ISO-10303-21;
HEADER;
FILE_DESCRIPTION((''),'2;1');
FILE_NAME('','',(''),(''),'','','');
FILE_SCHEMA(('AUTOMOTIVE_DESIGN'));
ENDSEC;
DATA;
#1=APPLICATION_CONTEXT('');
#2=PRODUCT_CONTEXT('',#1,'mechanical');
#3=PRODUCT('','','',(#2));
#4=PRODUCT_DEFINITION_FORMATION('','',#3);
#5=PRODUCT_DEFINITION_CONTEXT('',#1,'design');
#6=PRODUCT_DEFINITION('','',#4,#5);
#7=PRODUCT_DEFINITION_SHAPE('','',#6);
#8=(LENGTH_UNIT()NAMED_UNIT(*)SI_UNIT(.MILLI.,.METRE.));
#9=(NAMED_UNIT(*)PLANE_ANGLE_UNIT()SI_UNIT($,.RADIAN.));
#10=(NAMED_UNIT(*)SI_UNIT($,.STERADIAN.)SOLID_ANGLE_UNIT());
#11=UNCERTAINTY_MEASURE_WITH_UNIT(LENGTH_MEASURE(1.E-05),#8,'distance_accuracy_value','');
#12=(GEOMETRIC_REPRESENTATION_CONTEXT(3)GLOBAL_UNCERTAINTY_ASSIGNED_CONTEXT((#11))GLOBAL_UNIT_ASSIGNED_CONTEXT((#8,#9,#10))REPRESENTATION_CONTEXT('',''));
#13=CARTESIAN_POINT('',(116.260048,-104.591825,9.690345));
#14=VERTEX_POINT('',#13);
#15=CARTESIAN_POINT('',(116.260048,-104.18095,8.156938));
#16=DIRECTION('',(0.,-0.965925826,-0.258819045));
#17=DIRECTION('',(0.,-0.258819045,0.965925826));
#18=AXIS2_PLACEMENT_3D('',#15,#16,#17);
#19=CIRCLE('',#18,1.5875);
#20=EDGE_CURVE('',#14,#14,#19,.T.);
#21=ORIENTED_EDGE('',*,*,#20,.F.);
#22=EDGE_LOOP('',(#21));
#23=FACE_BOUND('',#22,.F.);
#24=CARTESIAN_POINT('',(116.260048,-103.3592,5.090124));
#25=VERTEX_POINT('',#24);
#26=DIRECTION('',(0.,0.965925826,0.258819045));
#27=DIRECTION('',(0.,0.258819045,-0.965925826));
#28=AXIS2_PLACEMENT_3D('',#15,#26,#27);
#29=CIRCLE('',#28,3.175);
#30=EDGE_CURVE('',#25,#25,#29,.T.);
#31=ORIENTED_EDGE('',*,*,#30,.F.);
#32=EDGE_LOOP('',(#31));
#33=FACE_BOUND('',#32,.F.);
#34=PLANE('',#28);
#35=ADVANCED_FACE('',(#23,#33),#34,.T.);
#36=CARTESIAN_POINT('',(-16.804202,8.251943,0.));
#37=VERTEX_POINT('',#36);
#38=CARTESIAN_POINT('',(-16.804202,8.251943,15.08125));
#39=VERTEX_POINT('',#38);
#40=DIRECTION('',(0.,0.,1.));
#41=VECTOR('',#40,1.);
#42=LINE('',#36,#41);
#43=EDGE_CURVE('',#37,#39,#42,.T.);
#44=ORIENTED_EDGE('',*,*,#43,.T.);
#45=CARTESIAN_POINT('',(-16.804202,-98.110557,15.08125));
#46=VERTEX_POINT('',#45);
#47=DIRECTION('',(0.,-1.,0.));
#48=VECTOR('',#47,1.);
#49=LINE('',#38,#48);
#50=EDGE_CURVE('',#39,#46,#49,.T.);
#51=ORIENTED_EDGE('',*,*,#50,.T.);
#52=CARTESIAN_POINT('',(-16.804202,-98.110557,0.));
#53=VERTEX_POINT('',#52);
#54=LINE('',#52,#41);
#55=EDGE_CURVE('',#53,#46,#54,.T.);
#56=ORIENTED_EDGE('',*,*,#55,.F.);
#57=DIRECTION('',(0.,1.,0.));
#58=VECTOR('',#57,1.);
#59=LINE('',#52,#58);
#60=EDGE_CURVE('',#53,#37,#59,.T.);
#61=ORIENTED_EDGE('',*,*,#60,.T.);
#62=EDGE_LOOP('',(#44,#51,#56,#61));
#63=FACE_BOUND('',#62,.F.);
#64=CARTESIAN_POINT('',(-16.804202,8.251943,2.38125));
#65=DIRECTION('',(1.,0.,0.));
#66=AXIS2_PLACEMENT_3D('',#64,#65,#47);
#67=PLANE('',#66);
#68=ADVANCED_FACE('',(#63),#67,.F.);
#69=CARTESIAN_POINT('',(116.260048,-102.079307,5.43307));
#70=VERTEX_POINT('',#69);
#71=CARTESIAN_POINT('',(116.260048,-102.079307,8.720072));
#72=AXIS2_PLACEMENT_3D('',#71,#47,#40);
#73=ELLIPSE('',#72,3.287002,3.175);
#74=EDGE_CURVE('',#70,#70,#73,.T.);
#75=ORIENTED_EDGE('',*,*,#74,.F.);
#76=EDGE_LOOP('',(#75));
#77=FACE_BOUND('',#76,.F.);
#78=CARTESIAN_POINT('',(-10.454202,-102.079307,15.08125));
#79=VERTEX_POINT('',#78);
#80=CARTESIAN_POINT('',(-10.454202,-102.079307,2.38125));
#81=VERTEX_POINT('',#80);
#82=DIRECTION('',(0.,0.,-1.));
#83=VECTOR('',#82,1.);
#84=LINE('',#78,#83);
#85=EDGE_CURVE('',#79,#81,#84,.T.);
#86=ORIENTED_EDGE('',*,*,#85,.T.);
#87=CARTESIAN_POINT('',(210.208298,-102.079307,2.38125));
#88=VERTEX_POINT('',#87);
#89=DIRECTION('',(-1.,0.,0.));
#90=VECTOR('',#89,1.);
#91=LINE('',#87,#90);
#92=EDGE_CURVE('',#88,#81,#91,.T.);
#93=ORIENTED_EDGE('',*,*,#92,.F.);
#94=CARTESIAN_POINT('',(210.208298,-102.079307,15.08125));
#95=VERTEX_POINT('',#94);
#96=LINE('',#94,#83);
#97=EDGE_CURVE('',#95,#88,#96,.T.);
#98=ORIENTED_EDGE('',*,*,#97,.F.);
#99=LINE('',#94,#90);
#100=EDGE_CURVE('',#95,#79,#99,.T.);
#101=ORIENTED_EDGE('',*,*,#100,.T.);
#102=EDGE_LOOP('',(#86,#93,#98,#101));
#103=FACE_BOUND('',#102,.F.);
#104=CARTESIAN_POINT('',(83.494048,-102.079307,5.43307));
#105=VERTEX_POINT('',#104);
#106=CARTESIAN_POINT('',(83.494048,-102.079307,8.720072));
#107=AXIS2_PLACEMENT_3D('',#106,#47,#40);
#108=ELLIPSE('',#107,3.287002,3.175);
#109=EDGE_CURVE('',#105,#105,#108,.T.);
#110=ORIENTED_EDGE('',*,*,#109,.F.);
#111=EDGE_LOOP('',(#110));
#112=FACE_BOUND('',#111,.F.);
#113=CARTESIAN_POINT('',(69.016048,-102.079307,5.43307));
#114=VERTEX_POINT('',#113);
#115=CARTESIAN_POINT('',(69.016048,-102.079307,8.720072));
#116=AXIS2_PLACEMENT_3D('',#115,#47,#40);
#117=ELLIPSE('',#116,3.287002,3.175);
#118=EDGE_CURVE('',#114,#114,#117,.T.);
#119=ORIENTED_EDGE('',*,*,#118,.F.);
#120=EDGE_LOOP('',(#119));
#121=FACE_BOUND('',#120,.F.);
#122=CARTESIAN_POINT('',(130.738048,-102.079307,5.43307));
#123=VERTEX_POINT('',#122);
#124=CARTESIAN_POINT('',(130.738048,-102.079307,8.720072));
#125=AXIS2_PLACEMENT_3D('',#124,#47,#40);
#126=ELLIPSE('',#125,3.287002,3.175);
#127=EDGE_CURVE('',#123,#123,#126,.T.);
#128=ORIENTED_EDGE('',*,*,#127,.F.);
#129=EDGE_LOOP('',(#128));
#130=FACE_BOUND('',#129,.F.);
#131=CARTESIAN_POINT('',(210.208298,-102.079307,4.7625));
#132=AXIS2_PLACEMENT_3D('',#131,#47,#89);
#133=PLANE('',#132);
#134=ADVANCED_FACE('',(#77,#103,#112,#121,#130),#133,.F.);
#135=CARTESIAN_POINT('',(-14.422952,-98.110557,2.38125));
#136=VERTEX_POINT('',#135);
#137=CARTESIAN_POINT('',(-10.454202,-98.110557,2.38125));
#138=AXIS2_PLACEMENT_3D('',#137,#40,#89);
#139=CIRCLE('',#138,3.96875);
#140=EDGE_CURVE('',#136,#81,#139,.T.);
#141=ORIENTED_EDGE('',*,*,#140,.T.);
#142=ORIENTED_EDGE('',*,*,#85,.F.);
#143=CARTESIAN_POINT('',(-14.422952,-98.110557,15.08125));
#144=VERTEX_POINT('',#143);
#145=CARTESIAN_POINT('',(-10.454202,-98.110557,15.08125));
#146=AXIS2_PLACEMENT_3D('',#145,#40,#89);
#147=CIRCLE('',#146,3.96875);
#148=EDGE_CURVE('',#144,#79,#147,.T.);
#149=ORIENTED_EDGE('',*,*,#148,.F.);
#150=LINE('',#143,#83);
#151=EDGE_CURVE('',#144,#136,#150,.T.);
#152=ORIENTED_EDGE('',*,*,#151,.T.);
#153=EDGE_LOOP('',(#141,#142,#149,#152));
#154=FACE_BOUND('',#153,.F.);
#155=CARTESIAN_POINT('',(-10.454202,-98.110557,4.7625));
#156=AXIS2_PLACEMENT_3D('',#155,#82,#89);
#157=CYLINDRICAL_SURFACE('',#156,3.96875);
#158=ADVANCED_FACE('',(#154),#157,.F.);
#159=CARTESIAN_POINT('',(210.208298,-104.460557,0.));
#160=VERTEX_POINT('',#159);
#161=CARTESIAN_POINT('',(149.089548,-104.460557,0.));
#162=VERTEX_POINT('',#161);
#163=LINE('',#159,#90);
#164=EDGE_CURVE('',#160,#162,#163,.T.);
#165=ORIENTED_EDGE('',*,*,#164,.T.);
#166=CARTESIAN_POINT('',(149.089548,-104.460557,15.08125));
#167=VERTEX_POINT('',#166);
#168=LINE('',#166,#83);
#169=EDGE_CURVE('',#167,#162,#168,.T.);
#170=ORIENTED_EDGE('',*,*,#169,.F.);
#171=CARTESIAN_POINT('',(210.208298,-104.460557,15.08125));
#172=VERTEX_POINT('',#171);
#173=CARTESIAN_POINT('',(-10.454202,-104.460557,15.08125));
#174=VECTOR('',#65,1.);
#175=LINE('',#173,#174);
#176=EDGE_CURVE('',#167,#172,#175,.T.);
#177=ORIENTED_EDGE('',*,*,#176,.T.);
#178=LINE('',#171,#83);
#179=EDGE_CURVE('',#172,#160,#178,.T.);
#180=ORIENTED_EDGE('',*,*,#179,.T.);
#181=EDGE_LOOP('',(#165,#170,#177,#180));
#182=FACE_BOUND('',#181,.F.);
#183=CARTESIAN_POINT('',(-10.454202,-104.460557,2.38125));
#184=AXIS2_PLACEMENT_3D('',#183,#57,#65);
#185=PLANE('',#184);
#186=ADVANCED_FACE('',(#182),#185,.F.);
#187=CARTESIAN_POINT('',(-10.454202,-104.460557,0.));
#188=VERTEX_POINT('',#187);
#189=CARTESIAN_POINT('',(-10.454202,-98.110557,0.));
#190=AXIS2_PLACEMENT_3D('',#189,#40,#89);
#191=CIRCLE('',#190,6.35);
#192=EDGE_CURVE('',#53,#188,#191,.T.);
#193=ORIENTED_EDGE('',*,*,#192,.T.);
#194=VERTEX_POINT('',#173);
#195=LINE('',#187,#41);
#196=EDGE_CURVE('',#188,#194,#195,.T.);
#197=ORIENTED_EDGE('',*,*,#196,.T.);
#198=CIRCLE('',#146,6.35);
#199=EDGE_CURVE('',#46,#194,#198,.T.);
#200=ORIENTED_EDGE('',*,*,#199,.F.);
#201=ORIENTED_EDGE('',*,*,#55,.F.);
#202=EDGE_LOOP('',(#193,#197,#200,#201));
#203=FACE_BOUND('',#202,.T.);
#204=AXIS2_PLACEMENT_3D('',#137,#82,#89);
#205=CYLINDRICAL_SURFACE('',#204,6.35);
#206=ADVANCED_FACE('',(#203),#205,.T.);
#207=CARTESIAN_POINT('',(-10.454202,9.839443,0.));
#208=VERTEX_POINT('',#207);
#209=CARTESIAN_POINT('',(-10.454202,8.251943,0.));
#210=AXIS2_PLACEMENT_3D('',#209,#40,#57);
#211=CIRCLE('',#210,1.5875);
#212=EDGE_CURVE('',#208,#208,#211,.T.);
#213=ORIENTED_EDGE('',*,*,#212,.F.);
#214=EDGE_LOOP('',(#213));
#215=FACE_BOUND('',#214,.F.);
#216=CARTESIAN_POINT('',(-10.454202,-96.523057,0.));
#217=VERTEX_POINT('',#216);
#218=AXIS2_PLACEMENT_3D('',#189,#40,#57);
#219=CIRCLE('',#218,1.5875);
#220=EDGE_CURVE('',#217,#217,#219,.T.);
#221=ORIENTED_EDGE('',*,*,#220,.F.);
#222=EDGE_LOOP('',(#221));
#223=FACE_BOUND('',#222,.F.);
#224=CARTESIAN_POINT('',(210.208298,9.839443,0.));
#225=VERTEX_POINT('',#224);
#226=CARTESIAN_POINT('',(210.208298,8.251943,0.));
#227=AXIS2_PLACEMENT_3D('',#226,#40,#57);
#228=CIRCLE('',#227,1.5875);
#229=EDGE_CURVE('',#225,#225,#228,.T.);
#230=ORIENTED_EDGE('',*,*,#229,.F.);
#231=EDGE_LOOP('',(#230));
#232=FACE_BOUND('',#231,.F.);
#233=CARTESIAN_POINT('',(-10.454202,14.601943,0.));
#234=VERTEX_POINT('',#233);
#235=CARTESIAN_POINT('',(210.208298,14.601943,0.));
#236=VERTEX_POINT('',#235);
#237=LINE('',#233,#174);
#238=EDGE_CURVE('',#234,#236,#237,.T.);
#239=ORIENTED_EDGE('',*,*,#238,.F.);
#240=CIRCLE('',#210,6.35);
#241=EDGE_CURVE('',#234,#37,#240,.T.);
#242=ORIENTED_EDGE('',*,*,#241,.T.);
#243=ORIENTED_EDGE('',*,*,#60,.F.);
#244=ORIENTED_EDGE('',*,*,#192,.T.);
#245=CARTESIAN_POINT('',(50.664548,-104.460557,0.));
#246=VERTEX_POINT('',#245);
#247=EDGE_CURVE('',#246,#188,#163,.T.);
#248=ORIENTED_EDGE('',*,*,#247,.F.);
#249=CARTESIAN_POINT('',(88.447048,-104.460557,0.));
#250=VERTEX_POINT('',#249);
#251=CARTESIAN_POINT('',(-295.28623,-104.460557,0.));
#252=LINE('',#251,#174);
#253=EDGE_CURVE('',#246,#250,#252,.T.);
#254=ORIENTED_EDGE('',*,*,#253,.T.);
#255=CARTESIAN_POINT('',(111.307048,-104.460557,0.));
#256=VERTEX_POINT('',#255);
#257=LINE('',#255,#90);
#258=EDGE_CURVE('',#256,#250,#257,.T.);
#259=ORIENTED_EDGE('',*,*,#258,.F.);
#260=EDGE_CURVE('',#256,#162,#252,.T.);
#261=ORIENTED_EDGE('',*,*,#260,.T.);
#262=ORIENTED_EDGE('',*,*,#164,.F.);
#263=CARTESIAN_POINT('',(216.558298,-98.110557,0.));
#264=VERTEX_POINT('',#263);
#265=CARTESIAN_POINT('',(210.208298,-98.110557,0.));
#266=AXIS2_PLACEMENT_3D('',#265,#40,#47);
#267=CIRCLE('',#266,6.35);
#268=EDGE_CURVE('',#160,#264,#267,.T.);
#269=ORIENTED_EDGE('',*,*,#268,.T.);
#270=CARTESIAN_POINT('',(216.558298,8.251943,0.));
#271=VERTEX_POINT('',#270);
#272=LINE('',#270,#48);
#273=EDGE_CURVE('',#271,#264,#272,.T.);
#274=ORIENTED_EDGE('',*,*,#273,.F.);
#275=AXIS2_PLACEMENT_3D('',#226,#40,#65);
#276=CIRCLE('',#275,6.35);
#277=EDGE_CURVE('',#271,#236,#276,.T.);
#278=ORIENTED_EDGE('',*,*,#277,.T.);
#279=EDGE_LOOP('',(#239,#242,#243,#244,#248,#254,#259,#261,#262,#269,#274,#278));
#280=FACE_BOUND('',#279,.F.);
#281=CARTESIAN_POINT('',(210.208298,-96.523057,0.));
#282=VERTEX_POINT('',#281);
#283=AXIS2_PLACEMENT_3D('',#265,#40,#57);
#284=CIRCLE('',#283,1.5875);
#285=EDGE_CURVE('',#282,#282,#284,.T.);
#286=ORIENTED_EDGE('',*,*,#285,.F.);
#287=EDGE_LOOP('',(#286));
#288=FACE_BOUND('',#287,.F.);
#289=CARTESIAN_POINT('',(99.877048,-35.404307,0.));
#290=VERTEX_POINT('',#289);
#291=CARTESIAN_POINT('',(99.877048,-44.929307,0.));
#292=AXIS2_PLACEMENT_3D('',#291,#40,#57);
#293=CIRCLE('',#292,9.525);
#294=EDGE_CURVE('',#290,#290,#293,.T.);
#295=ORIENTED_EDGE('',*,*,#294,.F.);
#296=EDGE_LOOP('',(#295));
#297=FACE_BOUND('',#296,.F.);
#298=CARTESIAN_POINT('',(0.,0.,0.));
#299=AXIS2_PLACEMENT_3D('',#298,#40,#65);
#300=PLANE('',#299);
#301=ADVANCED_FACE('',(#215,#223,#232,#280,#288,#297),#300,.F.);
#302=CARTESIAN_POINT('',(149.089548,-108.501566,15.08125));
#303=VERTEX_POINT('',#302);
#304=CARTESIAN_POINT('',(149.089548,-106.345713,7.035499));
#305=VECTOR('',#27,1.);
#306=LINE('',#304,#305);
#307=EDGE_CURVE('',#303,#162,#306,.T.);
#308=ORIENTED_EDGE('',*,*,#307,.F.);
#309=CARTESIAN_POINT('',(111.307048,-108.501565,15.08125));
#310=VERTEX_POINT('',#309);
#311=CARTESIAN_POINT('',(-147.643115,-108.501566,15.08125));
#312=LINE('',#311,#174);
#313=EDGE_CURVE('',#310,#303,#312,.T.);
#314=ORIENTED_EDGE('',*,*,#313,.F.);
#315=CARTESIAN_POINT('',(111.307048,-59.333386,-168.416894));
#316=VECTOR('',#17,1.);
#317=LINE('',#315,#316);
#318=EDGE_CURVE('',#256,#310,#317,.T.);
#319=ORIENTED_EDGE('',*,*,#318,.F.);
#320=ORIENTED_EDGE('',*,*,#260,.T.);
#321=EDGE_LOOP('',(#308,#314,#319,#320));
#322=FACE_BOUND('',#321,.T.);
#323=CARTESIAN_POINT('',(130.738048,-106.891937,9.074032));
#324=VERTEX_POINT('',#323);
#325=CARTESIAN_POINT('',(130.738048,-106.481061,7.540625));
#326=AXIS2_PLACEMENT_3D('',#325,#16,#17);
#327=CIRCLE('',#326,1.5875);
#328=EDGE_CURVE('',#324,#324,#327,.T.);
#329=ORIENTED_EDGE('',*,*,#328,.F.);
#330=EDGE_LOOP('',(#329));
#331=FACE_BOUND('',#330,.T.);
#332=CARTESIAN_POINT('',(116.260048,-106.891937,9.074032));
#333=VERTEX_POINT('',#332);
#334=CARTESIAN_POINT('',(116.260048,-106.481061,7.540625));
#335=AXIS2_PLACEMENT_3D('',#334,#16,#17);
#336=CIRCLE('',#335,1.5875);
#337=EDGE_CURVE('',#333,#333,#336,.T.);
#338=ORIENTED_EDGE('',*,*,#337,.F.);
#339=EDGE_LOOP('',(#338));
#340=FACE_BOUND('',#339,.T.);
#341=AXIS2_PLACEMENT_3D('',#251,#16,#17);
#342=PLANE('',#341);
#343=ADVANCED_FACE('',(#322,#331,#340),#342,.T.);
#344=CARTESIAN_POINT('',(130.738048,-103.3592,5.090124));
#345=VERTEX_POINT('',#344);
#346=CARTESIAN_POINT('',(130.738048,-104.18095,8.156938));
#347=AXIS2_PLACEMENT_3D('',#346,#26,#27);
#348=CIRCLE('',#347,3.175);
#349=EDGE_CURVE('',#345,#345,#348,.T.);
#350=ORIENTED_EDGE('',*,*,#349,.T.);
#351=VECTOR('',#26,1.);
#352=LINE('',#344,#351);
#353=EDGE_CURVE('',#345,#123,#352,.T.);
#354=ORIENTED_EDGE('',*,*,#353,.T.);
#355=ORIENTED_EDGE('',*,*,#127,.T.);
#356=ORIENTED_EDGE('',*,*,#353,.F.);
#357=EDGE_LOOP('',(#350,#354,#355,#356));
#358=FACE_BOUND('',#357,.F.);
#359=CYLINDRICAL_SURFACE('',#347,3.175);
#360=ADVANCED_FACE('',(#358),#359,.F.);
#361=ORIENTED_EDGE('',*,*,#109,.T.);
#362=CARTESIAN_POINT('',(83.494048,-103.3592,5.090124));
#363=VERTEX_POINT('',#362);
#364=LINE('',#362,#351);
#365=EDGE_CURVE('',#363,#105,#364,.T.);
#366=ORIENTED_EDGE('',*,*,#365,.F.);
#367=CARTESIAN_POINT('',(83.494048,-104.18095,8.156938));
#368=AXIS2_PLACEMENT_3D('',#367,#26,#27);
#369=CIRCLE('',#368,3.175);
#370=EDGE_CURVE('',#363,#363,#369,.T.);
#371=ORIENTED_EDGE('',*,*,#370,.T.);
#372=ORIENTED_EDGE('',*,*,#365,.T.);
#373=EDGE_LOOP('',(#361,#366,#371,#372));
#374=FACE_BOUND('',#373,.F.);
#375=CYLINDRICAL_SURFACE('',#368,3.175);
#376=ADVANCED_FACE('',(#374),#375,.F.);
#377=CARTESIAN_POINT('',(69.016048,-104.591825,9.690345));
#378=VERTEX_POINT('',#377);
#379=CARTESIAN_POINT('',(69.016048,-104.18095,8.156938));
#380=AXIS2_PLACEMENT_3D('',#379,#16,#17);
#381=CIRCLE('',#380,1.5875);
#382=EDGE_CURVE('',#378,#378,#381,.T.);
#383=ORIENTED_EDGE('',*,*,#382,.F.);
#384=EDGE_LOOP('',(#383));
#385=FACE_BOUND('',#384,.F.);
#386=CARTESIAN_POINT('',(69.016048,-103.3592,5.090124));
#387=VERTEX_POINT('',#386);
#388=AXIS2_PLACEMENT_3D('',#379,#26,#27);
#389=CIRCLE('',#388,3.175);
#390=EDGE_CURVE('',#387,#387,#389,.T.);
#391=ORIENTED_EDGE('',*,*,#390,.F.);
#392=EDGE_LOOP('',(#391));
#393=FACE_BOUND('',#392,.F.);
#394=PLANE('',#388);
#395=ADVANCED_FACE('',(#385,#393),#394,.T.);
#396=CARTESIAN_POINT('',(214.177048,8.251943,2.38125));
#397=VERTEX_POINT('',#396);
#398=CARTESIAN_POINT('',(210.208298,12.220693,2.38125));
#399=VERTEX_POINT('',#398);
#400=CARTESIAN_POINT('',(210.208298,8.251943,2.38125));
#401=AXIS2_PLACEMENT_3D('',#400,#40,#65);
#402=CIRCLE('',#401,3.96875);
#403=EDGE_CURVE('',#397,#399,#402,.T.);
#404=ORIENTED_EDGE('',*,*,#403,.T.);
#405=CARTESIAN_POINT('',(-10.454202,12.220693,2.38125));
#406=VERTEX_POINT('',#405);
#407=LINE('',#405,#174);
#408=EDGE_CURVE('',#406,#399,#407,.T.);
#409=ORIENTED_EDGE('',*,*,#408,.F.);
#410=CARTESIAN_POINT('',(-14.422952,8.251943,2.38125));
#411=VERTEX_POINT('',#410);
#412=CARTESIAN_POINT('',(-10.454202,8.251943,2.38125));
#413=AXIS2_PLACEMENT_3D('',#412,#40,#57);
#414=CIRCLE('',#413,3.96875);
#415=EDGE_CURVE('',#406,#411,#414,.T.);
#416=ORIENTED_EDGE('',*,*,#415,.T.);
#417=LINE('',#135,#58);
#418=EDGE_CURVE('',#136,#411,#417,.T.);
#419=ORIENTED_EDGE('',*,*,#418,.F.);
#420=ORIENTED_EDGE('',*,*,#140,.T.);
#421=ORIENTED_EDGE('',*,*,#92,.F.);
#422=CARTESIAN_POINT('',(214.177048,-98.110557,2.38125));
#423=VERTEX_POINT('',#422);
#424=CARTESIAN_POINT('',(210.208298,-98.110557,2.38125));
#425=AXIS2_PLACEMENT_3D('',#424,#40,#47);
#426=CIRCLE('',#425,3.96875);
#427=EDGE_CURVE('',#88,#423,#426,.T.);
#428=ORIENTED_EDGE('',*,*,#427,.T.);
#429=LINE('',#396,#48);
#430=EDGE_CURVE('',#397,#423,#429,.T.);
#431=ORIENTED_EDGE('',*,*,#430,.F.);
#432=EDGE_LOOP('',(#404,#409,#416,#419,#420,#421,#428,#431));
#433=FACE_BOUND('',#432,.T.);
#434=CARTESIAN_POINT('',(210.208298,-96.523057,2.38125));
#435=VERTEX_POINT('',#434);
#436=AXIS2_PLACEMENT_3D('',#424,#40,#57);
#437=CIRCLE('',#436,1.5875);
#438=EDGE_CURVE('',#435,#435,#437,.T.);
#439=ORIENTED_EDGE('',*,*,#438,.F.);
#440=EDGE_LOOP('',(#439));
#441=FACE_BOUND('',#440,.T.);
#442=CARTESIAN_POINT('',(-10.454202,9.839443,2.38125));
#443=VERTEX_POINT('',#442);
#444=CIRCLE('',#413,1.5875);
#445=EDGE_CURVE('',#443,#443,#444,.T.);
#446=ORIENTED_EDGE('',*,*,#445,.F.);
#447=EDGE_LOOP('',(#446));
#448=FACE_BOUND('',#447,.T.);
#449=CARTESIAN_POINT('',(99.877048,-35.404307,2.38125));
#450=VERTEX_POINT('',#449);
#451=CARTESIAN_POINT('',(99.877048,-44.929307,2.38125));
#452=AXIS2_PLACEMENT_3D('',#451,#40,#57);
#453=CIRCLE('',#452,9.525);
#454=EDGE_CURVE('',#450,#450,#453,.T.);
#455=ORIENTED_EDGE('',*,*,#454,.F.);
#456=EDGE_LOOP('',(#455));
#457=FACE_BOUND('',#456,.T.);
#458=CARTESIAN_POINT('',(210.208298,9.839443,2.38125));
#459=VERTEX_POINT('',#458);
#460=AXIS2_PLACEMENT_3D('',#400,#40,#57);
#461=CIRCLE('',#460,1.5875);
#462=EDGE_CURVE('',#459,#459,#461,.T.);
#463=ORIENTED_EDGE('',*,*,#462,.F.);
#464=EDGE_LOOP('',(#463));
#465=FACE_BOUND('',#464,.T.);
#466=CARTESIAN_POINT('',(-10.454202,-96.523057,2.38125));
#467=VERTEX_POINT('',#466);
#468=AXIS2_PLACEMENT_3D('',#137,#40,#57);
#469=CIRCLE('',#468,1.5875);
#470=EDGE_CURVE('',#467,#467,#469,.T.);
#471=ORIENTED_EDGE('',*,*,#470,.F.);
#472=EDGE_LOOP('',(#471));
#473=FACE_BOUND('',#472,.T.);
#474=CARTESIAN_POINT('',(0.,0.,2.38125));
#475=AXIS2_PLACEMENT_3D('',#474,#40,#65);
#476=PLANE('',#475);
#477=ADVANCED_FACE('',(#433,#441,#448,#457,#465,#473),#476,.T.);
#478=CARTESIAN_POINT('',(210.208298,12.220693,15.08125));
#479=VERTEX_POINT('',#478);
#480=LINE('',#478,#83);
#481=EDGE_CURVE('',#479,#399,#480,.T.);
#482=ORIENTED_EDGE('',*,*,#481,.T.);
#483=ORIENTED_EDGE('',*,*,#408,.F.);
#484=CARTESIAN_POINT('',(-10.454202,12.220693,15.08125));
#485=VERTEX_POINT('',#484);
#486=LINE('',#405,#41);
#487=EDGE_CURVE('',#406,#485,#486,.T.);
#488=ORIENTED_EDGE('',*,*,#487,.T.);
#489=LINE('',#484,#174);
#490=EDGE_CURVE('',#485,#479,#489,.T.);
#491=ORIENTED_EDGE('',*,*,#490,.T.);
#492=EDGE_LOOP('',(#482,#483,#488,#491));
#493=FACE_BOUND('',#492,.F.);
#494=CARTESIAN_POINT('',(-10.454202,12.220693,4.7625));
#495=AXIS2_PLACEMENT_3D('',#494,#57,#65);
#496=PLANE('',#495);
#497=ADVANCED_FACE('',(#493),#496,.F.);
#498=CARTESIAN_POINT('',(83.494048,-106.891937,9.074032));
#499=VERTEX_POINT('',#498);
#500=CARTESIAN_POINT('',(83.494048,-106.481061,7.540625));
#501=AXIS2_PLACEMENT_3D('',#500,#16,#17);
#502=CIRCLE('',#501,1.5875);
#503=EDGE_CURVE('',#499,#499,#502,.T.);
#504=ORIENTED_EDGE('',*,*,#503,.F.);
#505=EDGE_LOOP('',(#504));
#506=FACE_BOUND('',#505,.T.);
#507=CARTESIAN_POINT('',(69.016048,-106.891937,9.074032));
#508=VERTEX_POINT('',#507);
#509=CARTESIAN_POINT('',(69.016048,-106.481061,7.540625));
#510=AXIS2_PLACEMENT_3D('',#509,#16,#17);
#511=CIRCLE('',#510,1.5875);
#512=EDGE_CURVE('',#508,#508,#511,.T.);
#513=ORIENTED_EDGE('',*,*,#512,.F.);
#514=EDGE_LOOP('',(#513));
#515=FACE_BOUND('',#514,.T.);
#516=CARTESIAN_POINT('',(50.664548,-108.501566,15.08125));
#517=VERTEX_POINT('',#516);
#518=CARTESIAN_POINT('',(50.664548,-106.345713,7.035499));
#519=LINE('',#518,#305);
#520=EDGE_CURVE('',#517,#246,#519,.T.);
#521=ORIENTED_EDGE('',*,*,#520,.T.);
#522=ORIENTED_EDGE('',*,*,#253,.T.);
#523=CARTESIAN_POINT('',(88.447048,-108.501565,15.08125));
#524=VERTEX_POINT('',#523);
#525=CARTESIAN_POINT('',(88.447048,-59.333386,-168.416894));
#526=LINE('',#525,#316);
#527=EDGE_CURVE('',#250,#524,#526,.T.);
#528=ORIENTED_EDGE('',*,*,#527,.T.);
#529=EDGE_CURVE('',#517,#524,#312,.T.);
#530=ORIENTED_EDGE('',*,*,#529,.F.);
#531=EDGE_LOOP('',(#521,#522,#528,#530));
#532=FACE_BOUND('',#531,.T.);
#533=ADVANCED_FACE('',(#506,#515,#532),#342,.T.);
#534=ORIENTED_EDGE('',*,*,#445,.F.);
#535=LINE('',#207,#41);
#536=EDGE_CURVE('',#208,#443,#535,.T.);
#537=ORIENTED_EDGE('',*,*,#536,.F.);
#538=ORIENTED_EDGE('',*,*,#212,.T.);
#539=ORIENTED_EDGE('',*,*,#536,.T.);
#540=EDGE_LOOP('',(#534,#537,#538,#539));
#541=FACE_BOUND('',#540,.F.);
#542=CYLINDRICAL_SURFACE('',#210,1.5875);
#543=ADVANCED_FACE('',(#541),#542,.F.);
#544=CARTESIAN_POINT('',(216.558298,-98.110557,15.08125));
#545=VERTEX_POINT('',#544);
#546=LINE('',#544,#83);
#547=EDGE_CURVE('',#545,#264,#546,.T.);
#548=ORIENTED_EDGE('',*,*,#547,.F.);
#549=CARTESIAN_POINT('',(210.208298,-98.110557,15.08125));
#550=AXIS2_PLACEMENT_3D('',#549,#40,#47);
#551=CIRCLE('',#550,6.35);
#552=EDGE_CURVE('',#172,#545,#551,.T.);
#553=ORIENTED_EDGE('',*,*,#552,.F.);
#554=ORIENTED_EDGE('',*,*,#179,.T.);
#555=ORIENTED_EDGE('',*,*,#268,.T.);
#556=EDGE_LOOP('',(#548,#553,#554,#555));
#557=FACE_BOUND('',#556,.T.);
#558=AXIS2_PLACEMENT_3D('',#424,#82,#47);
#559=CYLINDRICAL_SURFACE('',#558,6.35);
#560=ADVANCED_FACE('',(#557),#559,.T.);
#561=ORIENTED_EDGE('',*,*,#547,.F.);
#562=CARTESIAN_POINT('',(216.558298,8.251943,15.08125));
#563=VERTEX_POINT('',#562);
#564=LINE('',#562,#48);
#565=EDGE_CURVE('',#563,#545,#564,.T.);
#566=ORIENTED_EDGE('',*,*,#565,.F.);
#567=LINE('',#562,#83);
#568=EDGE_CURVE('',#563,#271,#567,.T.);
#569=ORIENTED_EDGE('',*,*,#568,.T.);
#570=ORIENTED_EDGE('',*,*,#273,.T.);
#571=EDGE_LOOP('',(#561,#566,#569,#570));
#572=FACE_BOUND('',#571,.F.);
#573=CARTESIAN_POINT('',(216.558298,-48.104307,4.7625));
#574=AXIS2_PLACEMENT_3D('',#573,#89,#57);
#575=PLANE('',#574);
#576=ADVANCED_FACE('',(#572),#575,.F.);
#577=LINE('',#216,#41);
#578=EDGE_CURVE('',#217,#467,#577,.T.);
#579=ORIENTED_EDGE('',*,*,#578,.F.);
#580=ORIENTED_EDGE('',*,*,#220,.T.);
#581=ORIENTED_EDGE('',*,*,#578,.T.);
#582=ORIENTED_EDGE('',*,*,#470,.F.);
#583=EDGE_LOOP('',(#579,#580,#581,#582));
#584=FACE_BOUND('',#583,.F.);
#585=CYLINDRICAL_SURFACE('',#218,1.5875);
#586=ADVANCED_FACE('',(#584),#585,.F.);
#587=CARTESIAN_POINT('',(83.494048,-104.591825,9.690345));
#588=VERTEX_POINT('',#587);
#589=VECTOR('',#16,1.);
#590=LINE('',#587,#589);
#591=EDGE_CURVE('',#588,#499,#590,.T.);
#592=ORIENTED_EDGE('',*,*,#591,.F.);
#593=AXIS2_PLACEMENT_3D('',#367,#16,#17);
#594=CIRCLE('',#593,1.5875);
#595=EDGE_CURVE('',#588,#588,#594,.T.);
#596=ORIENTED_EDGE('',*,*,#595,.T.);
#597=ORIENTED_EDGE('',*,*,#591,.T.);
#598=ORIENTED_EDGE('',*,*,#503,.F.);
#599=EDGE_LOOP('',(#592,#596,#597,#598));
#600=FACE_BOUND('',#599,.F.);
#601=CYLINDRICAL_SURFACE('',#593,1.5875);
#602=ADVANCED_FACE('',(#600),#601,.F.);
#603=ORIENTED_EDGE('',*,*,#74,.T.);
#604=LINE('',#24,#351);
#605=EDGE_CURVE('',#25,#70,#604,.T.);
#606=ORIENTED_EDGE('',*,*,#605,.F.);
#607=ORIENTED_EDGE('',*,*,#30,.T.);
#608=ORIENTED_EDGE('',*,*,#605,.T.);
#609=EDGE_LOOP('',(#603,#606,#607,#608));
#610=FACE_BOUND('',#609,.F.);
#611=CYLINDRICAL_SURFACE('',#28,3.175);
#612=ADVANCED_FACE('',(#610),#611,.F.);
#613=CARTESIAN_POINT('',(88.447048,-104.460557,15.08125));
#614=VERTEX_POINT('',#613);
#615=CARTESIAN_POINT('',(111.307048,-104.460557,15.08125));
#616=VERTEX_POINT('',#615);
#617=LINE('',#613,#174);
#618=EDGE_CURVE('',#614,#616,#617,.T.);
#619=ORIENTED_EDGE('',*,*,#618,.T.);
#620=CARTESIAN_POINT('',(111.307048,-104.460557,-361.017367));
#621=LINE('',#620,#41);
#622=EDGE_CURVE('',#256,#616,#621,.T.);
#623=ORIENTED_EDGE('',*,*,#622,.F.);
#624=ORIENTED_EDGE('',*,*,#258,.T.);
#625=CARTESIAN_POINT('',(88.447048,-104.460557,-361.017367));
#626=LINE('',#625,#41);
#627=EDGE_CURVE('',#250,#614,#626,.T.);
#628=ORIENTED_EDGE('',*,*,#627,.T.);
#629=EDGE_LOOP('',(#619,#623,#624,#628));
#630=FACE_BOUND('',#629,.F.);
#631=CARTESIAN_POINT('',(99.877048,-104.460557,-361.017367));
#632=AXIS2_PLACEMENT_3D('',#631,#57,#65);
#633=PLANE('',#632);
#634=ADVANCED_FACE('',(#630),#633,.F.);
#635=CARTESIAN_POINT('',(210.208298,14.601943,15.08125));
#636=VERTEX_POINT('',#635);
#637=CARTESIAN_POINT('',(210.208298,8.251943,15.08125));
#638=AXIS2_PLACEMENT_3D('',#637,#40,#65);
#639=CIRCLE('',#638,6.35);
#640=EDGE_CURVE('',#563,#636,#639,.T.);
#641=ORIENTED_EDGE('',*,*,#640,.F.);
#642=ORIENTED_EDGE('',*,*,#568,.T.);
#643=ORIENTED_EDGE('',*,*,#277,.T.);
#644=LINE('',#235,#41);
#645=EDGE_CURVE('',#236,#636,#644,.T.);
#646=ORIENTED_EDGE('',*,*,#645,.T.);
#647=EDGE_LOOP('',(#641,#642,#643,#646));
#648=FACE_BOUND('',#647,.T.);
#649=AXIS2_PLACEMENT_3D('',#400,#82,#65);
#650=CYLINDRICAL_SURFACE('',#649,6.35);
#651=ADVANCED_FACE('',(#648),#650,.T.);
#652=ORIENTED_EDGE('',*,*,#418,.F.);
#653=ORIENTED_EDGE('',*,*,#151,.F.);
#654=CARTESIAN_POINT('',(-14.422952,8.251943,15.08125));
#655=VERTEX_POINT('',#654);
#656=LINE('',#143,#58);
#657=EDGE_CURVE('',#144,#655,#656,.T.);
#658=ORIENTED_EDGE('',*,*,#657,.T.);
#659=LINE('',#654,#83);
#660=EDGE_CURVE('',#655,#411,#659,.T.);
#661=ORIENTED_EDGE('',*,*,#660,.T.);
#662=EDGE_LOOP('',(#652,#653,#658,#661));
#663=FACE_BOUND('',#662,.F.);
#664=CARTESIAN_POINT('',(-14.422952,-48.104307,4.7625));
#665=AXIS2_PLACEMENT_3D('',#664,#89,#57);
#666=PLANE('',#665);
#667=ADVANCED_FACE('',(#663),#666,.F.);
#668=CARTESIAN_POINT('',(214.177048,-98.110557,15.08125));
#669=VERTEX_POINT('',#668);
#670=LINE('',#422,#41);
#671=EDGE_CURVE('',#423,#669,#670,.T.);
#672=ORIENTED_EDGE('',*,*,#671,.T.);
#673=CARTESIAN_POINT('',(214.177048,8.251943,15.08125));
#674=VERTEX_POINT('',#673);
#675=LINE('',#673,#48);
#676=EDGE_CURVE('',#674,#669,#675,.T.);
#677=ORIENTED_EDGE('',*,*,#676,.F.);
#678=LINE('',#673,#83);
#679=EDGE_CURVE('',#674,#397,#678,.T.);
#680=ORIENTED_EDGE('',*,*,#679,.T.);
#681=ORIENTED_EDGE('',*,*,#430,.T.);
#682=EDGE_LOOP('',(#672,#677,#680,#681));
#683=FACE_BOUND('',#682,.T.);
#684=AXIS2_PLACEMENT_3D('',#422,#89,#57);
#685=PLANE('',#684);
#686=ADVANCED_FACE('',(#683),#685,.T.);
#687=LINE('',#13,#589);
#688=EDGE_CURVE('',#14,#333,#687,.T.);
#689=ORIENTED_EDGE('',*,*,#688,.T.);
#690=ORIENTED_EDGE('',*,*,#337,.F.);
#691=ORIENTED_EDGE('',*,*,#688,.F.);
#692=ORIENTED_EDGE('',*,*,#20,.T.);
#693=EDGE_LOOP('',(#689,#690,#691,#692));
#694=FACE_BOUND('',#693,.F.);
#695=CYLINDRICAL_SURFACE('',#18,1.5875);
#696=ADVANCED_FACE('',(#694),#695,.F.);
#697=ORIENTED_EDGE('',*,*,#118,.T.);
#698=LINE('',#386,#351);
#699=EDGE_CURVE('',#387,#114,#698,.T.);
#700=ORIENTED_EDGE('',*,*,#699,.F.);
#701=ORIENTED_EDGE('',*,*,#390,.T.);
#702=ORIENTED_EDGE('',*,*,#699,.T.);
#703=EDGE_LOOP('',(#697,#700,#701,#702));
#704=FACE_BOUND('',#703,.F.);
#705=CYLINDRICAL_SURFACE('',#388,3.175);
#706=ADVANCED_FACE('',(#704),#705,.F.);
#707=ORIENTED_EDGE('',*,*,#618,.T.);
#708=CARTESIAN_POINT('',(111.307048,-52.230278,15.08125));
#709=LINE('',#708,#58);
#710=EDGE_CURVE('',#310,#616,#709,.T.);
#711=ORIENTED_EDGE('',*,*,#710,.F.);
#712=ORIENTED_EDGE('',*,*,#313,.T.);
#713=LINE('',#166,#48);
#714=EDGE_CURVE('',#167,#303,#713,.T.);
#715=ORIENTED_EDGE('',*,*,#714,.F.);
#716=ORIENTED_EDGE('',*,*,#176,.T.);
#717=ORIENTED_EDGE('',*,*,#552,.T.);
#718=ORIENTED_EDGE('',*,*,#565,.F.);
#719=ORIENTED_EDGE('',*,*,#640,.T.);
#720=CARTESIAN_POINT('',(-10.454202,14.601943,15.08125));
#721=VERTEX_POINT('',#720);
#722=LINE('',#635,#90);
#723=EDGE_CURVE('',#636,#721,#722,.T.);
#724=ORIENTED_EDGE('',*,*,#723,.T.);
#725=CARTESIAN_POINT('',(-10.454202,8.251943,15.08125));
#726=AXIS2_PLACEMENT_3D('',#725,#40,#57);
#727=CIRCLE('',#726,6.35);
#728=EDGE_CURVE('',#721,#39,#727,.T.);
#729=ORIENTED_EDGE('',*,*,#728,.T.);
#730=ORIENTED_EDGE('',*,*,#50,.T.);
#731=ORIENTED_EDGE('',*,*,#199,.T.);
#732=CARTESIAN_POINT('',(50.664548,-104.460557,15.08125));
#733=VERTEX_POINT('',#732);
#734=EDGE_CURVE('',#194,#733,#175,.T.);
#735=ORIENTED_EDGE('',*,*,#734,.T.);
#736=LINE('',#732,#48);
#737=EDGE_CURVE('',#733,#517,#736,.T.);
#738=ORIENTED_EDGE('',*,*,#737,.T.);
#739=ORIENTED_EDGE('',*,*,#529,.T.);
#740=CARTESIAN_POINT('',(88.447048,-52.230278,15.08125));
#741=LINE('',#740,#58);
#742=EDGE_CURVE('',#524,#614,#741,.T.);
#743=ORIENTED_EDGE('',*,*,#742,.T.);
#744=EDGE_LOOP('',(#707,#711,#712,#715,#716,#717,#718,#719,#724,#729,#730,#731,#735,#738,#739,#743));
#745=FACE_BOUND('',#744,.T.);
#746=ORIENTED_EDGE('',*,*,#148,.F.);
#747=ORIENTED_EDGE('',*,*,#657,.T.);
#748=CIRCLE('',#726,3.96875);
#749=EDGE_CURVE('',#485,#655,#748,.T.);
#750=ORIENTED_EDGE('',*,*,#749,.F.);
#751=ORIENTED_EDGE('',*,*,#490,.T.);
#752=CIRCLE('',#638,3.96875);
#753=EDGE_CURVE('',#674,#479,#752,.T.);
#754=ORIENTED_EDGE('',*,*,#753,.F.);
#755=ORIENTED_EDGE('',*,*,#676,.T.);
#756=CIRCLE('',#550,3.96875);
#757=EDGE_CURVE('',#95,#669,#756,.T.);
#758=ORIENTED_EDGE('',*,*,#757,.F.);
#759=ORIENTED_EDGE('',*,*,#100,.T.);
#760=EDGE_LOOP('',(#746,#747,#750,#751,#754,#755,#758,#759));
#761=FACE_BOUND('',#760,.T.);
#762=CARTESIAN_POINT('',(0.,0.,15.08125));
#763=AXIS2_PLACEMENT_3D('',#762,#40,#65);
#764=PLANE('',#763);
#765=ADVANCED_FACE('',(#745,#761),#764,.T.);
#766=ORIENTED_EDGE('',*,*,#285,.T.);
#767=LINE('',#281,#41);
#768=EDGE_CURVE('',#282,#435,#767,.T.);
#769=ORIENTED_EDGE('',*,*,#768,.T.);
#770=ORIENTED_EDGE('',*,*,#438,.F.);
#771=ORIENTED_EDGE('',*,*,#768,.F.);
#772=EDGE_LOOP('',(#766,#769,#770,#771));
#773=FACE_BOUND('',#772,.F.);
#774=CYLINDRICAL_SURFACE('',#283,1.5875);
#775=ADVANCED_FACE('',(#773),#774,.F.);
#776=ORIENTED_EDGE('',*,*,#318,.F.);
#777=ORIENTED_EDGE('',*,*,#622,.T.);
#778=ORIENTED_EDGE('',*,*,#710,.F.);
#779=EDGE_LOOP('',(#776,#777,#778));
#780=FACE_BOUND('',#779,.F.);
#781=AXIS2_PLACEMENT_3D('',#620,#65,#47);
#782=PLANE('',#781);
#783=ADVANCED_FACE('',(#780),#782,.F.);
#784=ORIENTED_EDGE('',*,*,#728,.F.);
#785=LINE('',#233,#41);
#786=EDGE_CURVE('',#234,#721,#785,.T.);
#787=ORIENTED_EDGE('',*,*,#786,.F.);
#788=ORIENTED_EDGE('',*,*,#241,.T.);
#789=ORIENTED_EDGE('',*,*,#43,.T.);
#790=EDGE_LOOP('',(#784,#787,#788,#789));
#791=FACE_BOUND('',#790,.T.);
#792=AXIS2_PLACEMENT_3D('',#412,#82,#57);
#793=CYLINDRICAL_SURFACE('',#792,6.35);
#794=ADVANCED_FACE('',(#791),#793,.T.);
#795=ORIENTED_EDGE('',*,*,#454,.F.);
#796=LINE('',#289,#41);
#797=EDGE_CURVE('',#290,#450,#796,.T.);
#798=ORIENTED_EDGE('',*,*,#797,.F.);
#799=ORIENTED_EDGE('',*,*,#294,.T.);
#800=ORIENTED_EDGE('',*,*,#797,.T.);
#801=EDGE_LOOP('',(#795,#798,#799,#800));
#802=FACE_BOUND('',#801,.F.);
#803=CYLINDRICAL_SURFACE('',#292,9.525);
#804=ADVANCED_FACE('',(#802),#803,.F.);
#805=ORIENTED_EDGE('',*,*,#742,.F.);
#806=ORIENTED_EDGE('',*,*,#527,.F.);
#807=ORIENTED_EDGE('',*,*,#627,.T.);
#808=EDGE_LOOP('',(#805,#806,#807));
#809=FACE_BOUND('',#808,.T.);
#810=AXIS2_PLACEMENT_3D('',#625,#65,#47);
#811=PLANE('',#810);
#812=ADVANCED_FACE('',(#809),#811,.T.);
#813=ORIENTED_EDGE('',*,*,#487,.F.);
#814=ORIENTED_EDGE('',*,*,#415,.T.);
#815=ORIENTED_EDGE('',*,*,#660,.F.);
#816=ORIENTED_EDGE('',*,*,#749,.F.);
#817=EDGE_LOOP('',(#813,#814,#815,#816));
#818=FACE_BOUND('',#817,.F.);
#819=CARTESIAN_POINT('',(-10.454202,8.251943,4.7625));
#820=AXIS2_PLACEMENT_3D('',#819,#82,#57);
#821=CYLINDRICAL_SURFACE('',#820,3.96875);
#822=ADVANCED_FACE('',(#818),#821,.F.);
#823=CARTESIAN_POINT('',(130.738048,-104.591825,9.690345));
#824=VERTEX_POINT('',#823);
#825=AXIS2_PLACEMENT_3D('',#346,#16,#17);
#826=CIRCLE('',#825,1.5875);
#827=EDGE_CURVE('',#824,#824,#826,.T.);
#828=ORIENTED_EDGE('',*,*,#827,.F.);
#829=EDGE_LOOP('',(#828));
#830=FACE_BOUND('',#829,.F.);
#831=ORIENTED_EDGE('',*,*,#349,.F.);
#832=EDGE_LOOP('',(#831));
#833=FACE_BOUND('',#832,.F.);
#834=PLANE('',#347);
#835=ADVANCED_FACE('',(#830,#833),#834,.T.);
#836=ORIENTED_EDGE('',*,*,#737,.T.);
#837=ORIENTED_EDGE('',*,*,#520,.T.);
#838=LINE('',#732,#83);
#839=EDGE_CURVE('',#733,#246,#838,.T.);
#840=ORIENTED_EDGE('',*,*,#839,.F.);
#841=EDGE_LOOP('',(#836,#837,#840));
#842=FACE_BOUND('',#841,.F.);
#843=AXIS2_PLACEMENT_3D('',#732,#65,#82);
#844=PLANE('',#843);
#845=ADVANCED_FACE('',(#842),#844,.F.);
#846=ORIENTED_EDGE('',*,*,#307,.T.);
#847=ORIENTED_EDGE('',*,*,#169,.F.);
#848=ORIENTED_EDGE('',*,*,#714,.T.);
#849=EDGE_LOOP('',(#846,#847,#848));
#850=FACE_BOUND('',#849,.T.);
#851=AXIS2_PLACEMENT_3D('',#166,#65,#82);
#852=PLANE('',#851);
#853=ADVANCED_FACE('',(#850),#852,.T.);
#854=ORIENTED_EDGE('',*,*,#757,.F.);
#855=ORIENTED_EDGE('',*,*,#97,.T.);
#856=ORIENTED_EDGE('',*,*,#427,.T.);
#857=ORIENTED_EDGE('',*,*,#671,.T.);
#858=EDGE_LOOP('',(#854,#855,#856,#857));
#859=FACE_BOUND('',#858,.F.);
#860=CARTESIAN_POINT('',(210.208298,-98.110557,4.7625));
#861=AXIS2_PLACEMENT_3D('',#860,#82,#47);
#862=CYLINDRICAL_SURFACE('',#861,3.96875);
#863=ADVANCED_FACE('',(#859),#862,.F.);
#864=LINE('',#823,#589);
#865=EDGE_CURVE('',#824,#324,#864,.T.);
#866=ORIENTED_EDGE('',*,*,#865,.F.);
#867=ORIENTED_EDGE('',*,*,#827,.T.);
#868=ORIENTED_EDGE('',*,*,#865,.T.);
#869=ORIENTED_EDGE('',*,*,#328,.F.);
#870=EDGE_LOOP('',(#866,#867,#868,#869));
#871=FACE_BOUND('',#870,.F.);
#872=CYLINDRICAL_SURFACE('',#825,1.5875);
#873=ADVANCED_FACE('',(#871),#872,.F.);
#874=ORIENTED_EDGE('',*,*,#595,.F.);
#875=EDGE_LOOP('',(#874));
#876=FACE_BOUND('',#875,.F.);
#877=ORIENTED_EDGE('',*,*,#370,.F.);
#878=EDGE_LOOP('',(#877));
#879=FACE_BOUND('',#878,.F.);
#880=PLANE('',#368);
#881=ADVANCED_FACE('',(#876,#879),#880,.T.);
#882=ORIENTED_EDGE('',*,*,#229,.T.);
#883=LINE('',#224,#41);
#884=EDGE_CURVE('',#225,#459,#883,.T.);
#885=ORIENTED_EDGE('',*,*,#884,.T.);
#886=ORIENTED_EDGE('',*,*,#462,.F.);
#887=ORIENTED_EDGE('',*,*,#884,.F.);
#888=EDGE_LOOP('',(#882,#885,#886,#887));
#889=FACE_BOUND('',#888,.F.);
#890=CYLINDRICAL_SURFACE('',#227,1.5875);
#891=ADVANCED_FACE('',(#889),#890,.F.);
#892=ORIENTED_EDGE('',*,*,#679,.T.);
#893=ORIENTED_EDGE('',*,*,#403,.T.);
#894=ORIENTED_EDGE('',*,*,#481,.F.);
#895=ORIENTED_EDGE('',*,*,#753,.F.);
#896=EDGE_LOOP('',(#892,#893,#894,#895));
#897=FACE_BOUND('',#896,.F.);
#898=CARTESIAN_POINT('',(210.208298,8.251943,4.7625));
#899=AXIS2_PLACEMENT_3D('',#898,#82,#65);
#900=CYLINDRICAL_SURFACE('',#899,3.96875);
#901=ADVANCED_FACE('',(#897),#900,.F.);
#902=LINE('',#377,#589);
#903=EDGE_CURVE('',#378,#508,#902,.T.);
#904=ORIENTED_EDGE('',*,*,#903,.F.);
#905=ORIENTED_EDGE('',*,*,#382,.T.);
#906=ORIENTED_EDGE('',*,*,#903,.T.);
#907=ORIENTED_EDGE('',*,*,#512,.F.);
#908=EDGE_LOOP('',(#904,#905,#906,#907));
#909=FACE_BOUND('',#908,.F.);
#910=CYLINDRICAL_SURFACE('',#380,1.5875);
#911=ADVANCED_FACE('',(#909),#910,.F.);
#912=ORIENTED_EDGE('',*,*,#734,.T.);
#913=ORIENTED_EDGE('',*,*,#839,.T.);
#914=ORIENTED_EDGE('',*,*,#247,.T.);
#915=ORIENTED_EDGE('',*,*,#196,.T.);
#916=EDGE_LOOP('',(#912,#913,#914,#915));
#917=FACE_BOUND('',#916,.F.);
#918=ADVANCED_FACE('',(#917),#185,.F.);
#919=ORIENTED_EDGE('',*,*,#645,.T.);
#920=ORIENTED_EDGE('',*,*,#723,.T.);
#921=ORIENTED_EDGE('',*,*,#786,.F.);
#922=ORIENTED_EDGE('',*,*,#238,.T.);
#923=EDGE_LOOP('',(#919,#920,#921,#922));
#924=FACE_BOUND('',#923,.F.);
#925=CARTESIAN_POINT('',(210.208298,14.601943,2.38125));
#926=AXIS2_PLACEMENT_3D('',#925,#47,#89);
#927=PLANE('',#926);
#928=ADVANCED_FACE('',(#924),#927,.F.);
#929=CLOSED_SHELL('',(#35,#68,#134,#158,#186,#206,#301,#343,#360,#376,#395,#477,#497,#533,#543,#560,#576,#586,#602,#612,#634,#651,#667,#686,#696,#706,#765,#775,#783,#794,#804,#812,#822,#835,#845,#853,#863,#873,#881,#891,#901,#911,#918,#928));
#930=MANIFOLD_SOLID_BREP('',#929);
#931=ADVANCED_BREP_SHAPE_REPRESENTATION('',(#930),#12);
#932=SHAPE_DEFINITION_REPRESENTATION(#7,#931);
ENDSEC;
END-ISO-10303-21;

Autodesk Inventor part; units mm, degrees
ref_plane "YZ Plane" through (0, 0, 0) normal (1, 0, 0) x (0, 1, 0)
ref_plane "XZ Plane" through (0, 0, 0) normal (0, 1, 0) x (-1, 0, 0)
sketch "Sketch1" plane through (0, 0, 0) normal (0, 0, 1) x (1, 0, 0)
  line L0 (-10.454202, 14.601943) -> (210.208298, 14.601943)
  line L1 (216.558298, 8.251943) -> (216.558298, -98.110557)
  line L2 (210.208298, -104.460557) -> (-10.454202, -104.460557)
  line L3 (-16.804202, -98.110557) -> (-16.804202, 8.251943)
  line L4 (99.877048, 12.220693) -> (-10.454202, 12.220693)
  line L5 (-14.422952, 8.251943) -> (-14.422952, -44.929307)
  line L6 (99.877048, 12.220693) -> (210.208298, 12.220693)
  line L7 (214.177048, 8.251943) -> (214.177048, -44.929307)
  line L8 (99.877048, -102.079307) -> (210.208298, -102.079307)
  line L9 (214.177048, -98.110557) -> (214.177048, -44.929307)
  line L10 (99.877048, -102.079307) -> (-10.454202, -102.079307)
  line L11 (-14.422952, -98.110557) -> (-14.422952, -44.929307)
  arc A0 (-10.454202, 14.601943) -> (-16.804202, 8.251943) centre (-10.454202, 8.251943) ccw
  arc A1 (216.558298, 8.251943) -> (210.208298, 14.601943) centre (210.208298, 8.251943) ccw
  arc A2 (210.208298, -104.460557) -> (216.558298, -98.110557) centre (210.208298, -98.110557) ccw
  arc A3 (-16.804202, -98.110557) -> (-10.454202, -104.460557) centre (-10.454202, -98.110557) ccw
  arc A4 (-10.454202, 12.220693) -> (-14.422952, 8.251943) centre (-10.454202, 8.251943) ccw
  arc A5 (214.177048, 8.251943) -> (210.208298, 12.220693) centre (210.208298, 8.251943) ccw
  arc A6 (210.208298, -102.079307) -> (214.177048, -98.110557) centre (210.208298, -98.110557) ccw
  arc A7 (-14.422952, -98.110557) -> (-10.454202, -102.079307) centre (-10.454202, -98.110557) ccw
  point P0 (0, 0)
  point P1 (-16.804202, 14.601943)
  point P2 (216.558298, -104.460557)
  point P3 (216.558298, 14.601943)
  point P4 (-16.804202, -104.460557)
  dimension "d0" = 233.3625
  dimension "d1" = 119.0625
  dimension "d9" = 6.35
  dimension "d10" = 3.96875
extrude "Extrusion1" add sketch "Sketch1" along normal blind 2.38125 contours L0 A1 L1 A2 L2 A3 L3 A0 | L6 A5 L7 L9 A6 L8 L10 A7 L11 L5 A4 L4
sketch "Sketch2" plane through (0, 0, 2.38125) normal (0, 0, 1) x (1, 0, 0)
  line L0 (210.208298, 14.601943) -> (-10.454202, 14.601943)
  arc A0 (-10.454202, 14.601943) -> (-16.804202, 8.251943) centre (-10.454202, 8.251943) ccw
  line L1 (-16.804202, 8.251943) -> (-16.804202, -98.110557)
  arc A1 (-16.804202, -98.110557) -> (-10.454202, -104.460557) centre (-10.454202, -98.110557) ccw
  line L2 (-10.454202, -104.460557) -> (210.208298, -104.460557)
  arc A2 (210.208298, -104.460557) -> (216.558298, -98.110557) centre (210.208298, -98.110557) ccw
  line L3 (216.558298, -98.110557) -> (216.558298, 8.251943)
  arc A3 (216.558298, 8.251943) -> (210.208298, 14.601943) centre (210.208298, 8.251943) ccw
  line L4 (99.877048, 12.220693) -> (-10.454202, 12.220693)
  line L5 (-14.422952, 8.251943) -> (-14.422952, -44.929307)
  line L6 (99.877048, -102.079307) -> (-10.454202, -102.079307)
  line L7 (-14.422952, -98.110557) -> (-14.422952, -44.929307)
  line L8 (99.877048, -102.079307) -> (210.208298, -102.079307)
  line L9 (214.177048, -98.110557) -> (214.177048, -44.929307)
  line L10 (99.877048, 12.220693) -> (210.208298, 12.220693)
  line L11 (214.177048, 8.251943) -> (214.177048, -44.929307)
  arc A4 (-10.454202, 12.220693) -> (-14.422952, 8.251943) centre (-10.454202, 8.251943) ccw
  arc A5 (214.177048, 8.251943) -> (210.208298, 12.220693) centre (210.208298, 8.251943) ccw
  arc A6 (210.208298, -102.079307) -> (214.177048, -98.110557) centre (210.208298, -98.110557) ccw
  arc A7 (-14.422952, -98.110557) -> (-10.454202, -102.079307) centre (-10.454202, -98.110557) ccw
  point P0 (0, 0)
  dimension "d15" = 3.96875
extrude "Extrusion2" add sketch "Sketch2" along normal blind 2.38125
sketch "Sketch3" plane through (0, 0, 4.7625) normal (0, 0, 1) x (1, 0, 0)
  arc A0 (-10.454202, 12.220693) -> (-14.422952, 8.251943) centre (-10.454202, 8.251943) ccw
  line L0 (-10.454202, 12.220693) -> (210.208298, 12.220693)
  arc A1 (214.177048, 8.251943) -> (210.208298, 12.220693) centre (210.208298, 8.251943) ccw
  line L1 (214.177048, 8.251943) -> (214.177048, -98.110557)
  arc A2 (210.208298, -102.079307) -> (214.177048, -98.110557) centre (210.208298, -98.110557) ccw
  line L2 (210.208298, -102.079307) -> (-10.454202, -102.079307)
  arc A3 (-14.422952, -98.110557) -> (-10.454202, -102.079307) centre (-10.454202, -98.110557) ccw
  line L3 (-14.422952, -98.110557) -> (-14.422952, 8.251943)
  line L4 (210.208298, 14.601943) -> (-10.454202, 14.601943)
  arc A4 (-10.454202, 14.601943) -> (-16.804202, 8.251943) centre (-10.454202, 8.251943) ccw
  line L5 (-16.804202, 8.251943) -> (-16.804202, -98.110557)
  arc A5 (-16.804202, -98.110557) -> (-10.454202, -104.460557) centre (-10.454202, -98.110557) ccw
  line L6 (-10.454202, -104.460557) -> (210.208298, -104.460557)
  arc A6 (210.208298, -104.460557) -> (216.558298, -98.110557) centre (210.208298, -98.110557) ccw
  line L7 (216.558298, -98.110557) -> (216.558298, 8.251943)
  arc A7 (216.558298, 8.251943) -> (210.208298, 14.601943) centre (210.208298, 8.251943) ccw
  line L8 (214.177048, -44.929307) -> (214.177048, -41.754307)
  line L9 (214.177048, -41.754307) -> (216.558298, -41.754307)
  line L10 (216.558298, -41.754307) -> (216.558298, -44.929307)
  line L11 (216.558298, -44.929307) -> (216.558298, -48.104307)
  line L12 (216.558298, -48.104307) -> (214.177048, -48.104307)
  line L13 (214.177048, -48.104307) -> (214.177048, -44.929307)
  line L14 (-14.422952, -44.929307) -> (-14.422952, -41.754307)
  line L15 (-14.422952, -41.754307) -> (-16.804202, -41.754307)
  line L16 (-16.804202, -41.754307) -> (-16.804202, -44.929307)
  line L17 (-16.804202, -44.929307) -> (-16.804202, -48.104307)
  line L18 (-16.804202, -48.104307) -> (-14.422952, -48.104307)
  line L19 (-14.422952, -48.104307) -> (-14.422952, -44.929307)
  point P0 (0, 0)
  dimension "d18" = 3.175
  dimension "d19" = 3.175
  dimension "d20" = 3.175
  dimension "d21" = 3.175
extrude "Extrusion3" add sketch "Sketch3" along normal blind 10.31875 contours A0 L3 L15 L5 A4 L4 A7 L7 L9 L1 A1 L0 | L3 A3 L2 A2 L1 L12 L7 A6 L6 A5 L5 L18
sketch "Sketch4" plane through (0, 0, 15.08125) normal (0, 0, 1) x (1, 0, 0)
  line L0 (214.177048, -41.754307) -> (216.558298, -41.754307)
  line L1 (216.558298, -41.754307) -> (216.558298, -48.104307)
  line L2 (216.558298, -48.104307) -> (214.177048, -48.104307)
  line L3 (214.177048, -48.104307) -> (214.177048, -41.754307)
  line L4 (-16.804202, -41.754307) -> (-14.422952, -41.754307)
  line L5 (-14.422952, -41.754307) -> (-14.422952, -48.104307)
  line L6 (-14.422952, -48.104307) -> (-16.804202, -48.104307)
  line L7 (-16.804202, -48.104307) -> (-16.804202, -41.754307)
  point P0 (0, 0)
  dimension "d24" = 2.38125
  dimension "d25" = 6.35
  dimension "d26" = 2.38125
  dimension "d27" = 6.35
extrude "Extrusion4" add sketch "Sketch4" against normal blind 7.9375
sketch "Sketch5" plane through (0, 0, 0) normal (0, 0, -1) x (-1, 0, 0)
  arc A0 (-210.208298, 14.601943) -> (-216.558298, 8.251943) centre (-210.208298, 8.251943) ccw
  line L0 (-210.208298, 8.251943) -> (-99.877048, 8.251943)
  line L1 (-99.877048, 8.251943) -> (-99.877048, -44.929307)
  line L2 (-99.877048, -44.929307) -> (-210.208298, -44.929307)
  line L3 (-210.208298, -44.929307) -> (-210.208298, 8.251943)
  point P0 (0, 0)
hole "Hole1" at (99.877048, -44.929307, 0) direction (0, 0, 1) diameter 19.05 end through all
sketch "Sketch7" plane through (-10.454202, -104.460557, 0) normal (0, -1, 0) x (1, 0, 0)
  line L0 (220.6625, 0) -> (0, 0)
  line L1 (0, 15.08125) -> (220.6625, 15.08125)
  line L2 (61.11875, 15.08125) -> (61.11875, 0)
  line L3 (159.54375, 15.08125) -> (159.54375, 0)
  line L4 (61.11875, 15.08125) -> (159.54375, 15.08125)
  line L5 (159.54375, 0) -> (61.11875, 0)
  point P0 (10.454202, 0)
extrude "Extrusion5" add sketch "Sketch7" along normal blind 25.4
sketch "Sketch8" plane through (149.089548, -104.460557, 15.08125) normal (1, 0, 0) x (0, 0, -1)
  line L0 (15.08125, 0) -> (-19.502452, -9.266675)
  line L1 (15.08125, 0) -> (50.884933, 0) construction
  point P0 (15.08125, 104.460557)
  dimension "d41" = 165
split body "Split1" sketch "Sketch8" result one side removed curves L0 removed pieces at (116.281215, -121.39389, 0.5)
ref_plane "Work Plane1" through (50.664548, -102.160446, 0.616313) normal (0, -0.9659258, -0.258819) x (1, 0, 0)
sketch "Sketch10" plane through (0, 0, 15.08125) normal (0, 0, 1) x (1, 0, 0)
  line L0 (99.877048, -104.460557) -> (111.307048, -104.460557)
  line L1 (111.307048, -104.460557) -> (111.307048, -108.501565)
  line L2 (99.877048, -104.460557) -> (88.447048, -104.460557)
  line L3 (88.447048, -104.460557) -> (88.447048, -108.501565)
  line L4 (88.447048, -108.501565) -> (111.307048, -108.501565)
  point P0 (0, 0)
  dimension "d43" = 11.43
  dimension "d44" = 11.43
split body "Split2" sketch "Sketch10" result one side removed curves L4 L1 L0 L2 L3 removed pieces at (99.877048, -106.671599, 10.183576)
sketch "Sketch13" plane through (50.664548, -102.160446, 0.616313) normal (0, -0.9659258, -0.258819) x (1, 0, 0)
  line L0 (37.7825, 0) -> (37.7825, 15.613259)
  line L1 (0, 15.613259) -> (37.7825, 15.613259)
  line L2 (0, 0) -> (0, 15.613259)
  line L3 (37.7825, 0) -> (0, 0)
  line L4 (60.6425, 15.613259) -> (60.6425, 0)
  line L5 (98.425, 0) -> (60.6425, 0)
  line L6 (98.425, 15.613259) -> (98.425, 0)
  line L7 (60.6425, 15.613259) -> (98.425, 15.613259)
  line L8 (0, 15.613259) -> (98.425, 15.613259)
  line L9 (49.2125, 15.613259) -> (49.2125, 0)
  line L10 (49.2125, 7.806629) -> (32.8295, 7.806629)
  line L11 (49.2125, 7.806629) -> (65.5955, 7.806629)
  line L12 (65.5955, 7.806629) -> (80.0735, 7.806629)
  line L13 (32.8295, 7.806629) -> (18.3515, 7.806629)
  point P0 (-50.664548, -27.036381)
  dimension "d45" = 16.383
  dimension "d46" = 16.383
  dimension "d47" = 14.478
  dimension "d48" = 14.478
hole "Hole2" at (69.016048, -104.18095, 8.156938) at (116.260048, -104.18095, 8.156938) at (83.494048, -104.18095, 8.156938) at (130.738048, -104.18095, 8.156938) direction (0, 0.9659258, 0.258819) diameter 6.35 end through all
sketch "Sketch14" plane through (50.664548, -102.160446, 0.616313) normal (0, -0.9659258, -0.258819) x (1, 0, 0)
  line L0 (37.7825, 0) -> (37.7825, 15.613259)
  line L1 (0, 15.613259) -> (37.7825, 15.613259)
  line L2 (0, 0) -> (0, 15.613259)
  line L3 (37.7825, 0) -> (0, 0)
  line L4 (60.6425, 15.613259) -> (60.6425, 0)
  line L5 (98.425, 0) -> (60.6425, 0)
  line L6 (98.425, 15.613259) -> (98.425, 0)
  line L7 (60.6425, 15.613259) -> (98.425, 15.613259)
  line L8 (0, 15.613259) -> (98.425, 15.613259)
  line L9 (49.2125, 15.613259) -> (49.2125, 0)
  line L10 (49.2125, 7.806629) -> (65.5955, 7.806629)
  line L11 (65.5955, 7.806629) -> (80.0735, 7.806629)
  line L12 (49.2125, 7.806629) -> (32.8295, 7.806629)
  line L13 (32.8295, 7.806629) -> (18.3515, 7.806629)
  point P0 (-50.664548, -27.036381)
  dimension "d56" = 16.383
  dimension "d57" = 14.478
  dimension "d58" = 16.383
  dimension "d59" = 14.478
hole "Hole3" at (69.016048, -104.18095, 8.156938) at (83.494048, -104.18095, 8.156938) at (116.260048, -104.18095, 8.156938) at (130.738048, -104.18095, 8.156938) direction (0, -0.9659258, -0.258819) diameter 3.175 end through all
sketch "Sketch15" plane through (0, 0, 4.7625) normal (0, 0, 1) x (1, 0, 0)
  line L0 (216.558298, -41.754307) -> (214.177048, -41.754307)
  line L1 (214.177048, -41.754307) -> (214.177048, -48.104307)
  line L2 (216.558298, -41.754307) -> (214.177048, -41.754307)
  line L3 (214.177048, -41.754307) -> (214.177048, -48.104307)
  line L4 (214.177048, -48.104307) -> (216.558298, -48.104307)
  line L5 (216.558298, -48.104307) -> (216.558298, -41.754307)
  point P0 (0, 0)
extrude "Extrusion6" add sketch "Sketch15" along normal blind 2.3876
sketch "Sketch16" plane through (0, 0, 4.7625) normal (0, 0, 1) x (1, 0, 0)
  line L0 (-14.422952, -41.754307) -> (-16.804202, -41.754307)
  line L1 (-16.804202, -41.754307) -> (-16.804202, -48.104307)
  line L2 (-14.422952, -41.754307) -> (-16.804202, -41.754307)
  line L3 (-16.804202, -41.754307) -> (-16.804202, -48.104307)
  line L4 (-16.804202, -48.104307) -> (-14.422952, -48.104307)
  line L5 (-14.422952, -48.104307) -> (-14.422952, -41.754307)
  point P0 (0, 0)
extrude "Extrusion7" add sketch "Sketch16" along normal blind 2.3876
sketch "Sketch17" plane through (0, 0, 0) normal (0, 0, -1) x (-1, 0, 0)
  arc A0 (10.454202, -104.460557) -> (16.804202, -98.110557) centre (10.454202, -98.110557) ccw
  arc A1 (16.804202, 8.251943) -> (10.454202, 14.601943) centre (10.454202, 8.251943) ccw
  arc A2 (-210.208298, 14.601943) -> (-216.558298, 8.251943) centre (-210.208298, 8.251943) ccw
  arc A3 (-216.558298, -98.110557) -> (-210.208298, -104.460557) centre (-210.208298, -98.110557) ccw
  point P0 (0, 0)
hole "Hole4" at (210.208298, 8.251943, 0) at (-10.454202, 8.251943, 0) at (-10.454202, -98.110557, 0) at (210.208298, -98.110557, 0) direction (0, 0, 1) diameter 3.175 end through all
properties part number "Master Tablet Enclosure"
